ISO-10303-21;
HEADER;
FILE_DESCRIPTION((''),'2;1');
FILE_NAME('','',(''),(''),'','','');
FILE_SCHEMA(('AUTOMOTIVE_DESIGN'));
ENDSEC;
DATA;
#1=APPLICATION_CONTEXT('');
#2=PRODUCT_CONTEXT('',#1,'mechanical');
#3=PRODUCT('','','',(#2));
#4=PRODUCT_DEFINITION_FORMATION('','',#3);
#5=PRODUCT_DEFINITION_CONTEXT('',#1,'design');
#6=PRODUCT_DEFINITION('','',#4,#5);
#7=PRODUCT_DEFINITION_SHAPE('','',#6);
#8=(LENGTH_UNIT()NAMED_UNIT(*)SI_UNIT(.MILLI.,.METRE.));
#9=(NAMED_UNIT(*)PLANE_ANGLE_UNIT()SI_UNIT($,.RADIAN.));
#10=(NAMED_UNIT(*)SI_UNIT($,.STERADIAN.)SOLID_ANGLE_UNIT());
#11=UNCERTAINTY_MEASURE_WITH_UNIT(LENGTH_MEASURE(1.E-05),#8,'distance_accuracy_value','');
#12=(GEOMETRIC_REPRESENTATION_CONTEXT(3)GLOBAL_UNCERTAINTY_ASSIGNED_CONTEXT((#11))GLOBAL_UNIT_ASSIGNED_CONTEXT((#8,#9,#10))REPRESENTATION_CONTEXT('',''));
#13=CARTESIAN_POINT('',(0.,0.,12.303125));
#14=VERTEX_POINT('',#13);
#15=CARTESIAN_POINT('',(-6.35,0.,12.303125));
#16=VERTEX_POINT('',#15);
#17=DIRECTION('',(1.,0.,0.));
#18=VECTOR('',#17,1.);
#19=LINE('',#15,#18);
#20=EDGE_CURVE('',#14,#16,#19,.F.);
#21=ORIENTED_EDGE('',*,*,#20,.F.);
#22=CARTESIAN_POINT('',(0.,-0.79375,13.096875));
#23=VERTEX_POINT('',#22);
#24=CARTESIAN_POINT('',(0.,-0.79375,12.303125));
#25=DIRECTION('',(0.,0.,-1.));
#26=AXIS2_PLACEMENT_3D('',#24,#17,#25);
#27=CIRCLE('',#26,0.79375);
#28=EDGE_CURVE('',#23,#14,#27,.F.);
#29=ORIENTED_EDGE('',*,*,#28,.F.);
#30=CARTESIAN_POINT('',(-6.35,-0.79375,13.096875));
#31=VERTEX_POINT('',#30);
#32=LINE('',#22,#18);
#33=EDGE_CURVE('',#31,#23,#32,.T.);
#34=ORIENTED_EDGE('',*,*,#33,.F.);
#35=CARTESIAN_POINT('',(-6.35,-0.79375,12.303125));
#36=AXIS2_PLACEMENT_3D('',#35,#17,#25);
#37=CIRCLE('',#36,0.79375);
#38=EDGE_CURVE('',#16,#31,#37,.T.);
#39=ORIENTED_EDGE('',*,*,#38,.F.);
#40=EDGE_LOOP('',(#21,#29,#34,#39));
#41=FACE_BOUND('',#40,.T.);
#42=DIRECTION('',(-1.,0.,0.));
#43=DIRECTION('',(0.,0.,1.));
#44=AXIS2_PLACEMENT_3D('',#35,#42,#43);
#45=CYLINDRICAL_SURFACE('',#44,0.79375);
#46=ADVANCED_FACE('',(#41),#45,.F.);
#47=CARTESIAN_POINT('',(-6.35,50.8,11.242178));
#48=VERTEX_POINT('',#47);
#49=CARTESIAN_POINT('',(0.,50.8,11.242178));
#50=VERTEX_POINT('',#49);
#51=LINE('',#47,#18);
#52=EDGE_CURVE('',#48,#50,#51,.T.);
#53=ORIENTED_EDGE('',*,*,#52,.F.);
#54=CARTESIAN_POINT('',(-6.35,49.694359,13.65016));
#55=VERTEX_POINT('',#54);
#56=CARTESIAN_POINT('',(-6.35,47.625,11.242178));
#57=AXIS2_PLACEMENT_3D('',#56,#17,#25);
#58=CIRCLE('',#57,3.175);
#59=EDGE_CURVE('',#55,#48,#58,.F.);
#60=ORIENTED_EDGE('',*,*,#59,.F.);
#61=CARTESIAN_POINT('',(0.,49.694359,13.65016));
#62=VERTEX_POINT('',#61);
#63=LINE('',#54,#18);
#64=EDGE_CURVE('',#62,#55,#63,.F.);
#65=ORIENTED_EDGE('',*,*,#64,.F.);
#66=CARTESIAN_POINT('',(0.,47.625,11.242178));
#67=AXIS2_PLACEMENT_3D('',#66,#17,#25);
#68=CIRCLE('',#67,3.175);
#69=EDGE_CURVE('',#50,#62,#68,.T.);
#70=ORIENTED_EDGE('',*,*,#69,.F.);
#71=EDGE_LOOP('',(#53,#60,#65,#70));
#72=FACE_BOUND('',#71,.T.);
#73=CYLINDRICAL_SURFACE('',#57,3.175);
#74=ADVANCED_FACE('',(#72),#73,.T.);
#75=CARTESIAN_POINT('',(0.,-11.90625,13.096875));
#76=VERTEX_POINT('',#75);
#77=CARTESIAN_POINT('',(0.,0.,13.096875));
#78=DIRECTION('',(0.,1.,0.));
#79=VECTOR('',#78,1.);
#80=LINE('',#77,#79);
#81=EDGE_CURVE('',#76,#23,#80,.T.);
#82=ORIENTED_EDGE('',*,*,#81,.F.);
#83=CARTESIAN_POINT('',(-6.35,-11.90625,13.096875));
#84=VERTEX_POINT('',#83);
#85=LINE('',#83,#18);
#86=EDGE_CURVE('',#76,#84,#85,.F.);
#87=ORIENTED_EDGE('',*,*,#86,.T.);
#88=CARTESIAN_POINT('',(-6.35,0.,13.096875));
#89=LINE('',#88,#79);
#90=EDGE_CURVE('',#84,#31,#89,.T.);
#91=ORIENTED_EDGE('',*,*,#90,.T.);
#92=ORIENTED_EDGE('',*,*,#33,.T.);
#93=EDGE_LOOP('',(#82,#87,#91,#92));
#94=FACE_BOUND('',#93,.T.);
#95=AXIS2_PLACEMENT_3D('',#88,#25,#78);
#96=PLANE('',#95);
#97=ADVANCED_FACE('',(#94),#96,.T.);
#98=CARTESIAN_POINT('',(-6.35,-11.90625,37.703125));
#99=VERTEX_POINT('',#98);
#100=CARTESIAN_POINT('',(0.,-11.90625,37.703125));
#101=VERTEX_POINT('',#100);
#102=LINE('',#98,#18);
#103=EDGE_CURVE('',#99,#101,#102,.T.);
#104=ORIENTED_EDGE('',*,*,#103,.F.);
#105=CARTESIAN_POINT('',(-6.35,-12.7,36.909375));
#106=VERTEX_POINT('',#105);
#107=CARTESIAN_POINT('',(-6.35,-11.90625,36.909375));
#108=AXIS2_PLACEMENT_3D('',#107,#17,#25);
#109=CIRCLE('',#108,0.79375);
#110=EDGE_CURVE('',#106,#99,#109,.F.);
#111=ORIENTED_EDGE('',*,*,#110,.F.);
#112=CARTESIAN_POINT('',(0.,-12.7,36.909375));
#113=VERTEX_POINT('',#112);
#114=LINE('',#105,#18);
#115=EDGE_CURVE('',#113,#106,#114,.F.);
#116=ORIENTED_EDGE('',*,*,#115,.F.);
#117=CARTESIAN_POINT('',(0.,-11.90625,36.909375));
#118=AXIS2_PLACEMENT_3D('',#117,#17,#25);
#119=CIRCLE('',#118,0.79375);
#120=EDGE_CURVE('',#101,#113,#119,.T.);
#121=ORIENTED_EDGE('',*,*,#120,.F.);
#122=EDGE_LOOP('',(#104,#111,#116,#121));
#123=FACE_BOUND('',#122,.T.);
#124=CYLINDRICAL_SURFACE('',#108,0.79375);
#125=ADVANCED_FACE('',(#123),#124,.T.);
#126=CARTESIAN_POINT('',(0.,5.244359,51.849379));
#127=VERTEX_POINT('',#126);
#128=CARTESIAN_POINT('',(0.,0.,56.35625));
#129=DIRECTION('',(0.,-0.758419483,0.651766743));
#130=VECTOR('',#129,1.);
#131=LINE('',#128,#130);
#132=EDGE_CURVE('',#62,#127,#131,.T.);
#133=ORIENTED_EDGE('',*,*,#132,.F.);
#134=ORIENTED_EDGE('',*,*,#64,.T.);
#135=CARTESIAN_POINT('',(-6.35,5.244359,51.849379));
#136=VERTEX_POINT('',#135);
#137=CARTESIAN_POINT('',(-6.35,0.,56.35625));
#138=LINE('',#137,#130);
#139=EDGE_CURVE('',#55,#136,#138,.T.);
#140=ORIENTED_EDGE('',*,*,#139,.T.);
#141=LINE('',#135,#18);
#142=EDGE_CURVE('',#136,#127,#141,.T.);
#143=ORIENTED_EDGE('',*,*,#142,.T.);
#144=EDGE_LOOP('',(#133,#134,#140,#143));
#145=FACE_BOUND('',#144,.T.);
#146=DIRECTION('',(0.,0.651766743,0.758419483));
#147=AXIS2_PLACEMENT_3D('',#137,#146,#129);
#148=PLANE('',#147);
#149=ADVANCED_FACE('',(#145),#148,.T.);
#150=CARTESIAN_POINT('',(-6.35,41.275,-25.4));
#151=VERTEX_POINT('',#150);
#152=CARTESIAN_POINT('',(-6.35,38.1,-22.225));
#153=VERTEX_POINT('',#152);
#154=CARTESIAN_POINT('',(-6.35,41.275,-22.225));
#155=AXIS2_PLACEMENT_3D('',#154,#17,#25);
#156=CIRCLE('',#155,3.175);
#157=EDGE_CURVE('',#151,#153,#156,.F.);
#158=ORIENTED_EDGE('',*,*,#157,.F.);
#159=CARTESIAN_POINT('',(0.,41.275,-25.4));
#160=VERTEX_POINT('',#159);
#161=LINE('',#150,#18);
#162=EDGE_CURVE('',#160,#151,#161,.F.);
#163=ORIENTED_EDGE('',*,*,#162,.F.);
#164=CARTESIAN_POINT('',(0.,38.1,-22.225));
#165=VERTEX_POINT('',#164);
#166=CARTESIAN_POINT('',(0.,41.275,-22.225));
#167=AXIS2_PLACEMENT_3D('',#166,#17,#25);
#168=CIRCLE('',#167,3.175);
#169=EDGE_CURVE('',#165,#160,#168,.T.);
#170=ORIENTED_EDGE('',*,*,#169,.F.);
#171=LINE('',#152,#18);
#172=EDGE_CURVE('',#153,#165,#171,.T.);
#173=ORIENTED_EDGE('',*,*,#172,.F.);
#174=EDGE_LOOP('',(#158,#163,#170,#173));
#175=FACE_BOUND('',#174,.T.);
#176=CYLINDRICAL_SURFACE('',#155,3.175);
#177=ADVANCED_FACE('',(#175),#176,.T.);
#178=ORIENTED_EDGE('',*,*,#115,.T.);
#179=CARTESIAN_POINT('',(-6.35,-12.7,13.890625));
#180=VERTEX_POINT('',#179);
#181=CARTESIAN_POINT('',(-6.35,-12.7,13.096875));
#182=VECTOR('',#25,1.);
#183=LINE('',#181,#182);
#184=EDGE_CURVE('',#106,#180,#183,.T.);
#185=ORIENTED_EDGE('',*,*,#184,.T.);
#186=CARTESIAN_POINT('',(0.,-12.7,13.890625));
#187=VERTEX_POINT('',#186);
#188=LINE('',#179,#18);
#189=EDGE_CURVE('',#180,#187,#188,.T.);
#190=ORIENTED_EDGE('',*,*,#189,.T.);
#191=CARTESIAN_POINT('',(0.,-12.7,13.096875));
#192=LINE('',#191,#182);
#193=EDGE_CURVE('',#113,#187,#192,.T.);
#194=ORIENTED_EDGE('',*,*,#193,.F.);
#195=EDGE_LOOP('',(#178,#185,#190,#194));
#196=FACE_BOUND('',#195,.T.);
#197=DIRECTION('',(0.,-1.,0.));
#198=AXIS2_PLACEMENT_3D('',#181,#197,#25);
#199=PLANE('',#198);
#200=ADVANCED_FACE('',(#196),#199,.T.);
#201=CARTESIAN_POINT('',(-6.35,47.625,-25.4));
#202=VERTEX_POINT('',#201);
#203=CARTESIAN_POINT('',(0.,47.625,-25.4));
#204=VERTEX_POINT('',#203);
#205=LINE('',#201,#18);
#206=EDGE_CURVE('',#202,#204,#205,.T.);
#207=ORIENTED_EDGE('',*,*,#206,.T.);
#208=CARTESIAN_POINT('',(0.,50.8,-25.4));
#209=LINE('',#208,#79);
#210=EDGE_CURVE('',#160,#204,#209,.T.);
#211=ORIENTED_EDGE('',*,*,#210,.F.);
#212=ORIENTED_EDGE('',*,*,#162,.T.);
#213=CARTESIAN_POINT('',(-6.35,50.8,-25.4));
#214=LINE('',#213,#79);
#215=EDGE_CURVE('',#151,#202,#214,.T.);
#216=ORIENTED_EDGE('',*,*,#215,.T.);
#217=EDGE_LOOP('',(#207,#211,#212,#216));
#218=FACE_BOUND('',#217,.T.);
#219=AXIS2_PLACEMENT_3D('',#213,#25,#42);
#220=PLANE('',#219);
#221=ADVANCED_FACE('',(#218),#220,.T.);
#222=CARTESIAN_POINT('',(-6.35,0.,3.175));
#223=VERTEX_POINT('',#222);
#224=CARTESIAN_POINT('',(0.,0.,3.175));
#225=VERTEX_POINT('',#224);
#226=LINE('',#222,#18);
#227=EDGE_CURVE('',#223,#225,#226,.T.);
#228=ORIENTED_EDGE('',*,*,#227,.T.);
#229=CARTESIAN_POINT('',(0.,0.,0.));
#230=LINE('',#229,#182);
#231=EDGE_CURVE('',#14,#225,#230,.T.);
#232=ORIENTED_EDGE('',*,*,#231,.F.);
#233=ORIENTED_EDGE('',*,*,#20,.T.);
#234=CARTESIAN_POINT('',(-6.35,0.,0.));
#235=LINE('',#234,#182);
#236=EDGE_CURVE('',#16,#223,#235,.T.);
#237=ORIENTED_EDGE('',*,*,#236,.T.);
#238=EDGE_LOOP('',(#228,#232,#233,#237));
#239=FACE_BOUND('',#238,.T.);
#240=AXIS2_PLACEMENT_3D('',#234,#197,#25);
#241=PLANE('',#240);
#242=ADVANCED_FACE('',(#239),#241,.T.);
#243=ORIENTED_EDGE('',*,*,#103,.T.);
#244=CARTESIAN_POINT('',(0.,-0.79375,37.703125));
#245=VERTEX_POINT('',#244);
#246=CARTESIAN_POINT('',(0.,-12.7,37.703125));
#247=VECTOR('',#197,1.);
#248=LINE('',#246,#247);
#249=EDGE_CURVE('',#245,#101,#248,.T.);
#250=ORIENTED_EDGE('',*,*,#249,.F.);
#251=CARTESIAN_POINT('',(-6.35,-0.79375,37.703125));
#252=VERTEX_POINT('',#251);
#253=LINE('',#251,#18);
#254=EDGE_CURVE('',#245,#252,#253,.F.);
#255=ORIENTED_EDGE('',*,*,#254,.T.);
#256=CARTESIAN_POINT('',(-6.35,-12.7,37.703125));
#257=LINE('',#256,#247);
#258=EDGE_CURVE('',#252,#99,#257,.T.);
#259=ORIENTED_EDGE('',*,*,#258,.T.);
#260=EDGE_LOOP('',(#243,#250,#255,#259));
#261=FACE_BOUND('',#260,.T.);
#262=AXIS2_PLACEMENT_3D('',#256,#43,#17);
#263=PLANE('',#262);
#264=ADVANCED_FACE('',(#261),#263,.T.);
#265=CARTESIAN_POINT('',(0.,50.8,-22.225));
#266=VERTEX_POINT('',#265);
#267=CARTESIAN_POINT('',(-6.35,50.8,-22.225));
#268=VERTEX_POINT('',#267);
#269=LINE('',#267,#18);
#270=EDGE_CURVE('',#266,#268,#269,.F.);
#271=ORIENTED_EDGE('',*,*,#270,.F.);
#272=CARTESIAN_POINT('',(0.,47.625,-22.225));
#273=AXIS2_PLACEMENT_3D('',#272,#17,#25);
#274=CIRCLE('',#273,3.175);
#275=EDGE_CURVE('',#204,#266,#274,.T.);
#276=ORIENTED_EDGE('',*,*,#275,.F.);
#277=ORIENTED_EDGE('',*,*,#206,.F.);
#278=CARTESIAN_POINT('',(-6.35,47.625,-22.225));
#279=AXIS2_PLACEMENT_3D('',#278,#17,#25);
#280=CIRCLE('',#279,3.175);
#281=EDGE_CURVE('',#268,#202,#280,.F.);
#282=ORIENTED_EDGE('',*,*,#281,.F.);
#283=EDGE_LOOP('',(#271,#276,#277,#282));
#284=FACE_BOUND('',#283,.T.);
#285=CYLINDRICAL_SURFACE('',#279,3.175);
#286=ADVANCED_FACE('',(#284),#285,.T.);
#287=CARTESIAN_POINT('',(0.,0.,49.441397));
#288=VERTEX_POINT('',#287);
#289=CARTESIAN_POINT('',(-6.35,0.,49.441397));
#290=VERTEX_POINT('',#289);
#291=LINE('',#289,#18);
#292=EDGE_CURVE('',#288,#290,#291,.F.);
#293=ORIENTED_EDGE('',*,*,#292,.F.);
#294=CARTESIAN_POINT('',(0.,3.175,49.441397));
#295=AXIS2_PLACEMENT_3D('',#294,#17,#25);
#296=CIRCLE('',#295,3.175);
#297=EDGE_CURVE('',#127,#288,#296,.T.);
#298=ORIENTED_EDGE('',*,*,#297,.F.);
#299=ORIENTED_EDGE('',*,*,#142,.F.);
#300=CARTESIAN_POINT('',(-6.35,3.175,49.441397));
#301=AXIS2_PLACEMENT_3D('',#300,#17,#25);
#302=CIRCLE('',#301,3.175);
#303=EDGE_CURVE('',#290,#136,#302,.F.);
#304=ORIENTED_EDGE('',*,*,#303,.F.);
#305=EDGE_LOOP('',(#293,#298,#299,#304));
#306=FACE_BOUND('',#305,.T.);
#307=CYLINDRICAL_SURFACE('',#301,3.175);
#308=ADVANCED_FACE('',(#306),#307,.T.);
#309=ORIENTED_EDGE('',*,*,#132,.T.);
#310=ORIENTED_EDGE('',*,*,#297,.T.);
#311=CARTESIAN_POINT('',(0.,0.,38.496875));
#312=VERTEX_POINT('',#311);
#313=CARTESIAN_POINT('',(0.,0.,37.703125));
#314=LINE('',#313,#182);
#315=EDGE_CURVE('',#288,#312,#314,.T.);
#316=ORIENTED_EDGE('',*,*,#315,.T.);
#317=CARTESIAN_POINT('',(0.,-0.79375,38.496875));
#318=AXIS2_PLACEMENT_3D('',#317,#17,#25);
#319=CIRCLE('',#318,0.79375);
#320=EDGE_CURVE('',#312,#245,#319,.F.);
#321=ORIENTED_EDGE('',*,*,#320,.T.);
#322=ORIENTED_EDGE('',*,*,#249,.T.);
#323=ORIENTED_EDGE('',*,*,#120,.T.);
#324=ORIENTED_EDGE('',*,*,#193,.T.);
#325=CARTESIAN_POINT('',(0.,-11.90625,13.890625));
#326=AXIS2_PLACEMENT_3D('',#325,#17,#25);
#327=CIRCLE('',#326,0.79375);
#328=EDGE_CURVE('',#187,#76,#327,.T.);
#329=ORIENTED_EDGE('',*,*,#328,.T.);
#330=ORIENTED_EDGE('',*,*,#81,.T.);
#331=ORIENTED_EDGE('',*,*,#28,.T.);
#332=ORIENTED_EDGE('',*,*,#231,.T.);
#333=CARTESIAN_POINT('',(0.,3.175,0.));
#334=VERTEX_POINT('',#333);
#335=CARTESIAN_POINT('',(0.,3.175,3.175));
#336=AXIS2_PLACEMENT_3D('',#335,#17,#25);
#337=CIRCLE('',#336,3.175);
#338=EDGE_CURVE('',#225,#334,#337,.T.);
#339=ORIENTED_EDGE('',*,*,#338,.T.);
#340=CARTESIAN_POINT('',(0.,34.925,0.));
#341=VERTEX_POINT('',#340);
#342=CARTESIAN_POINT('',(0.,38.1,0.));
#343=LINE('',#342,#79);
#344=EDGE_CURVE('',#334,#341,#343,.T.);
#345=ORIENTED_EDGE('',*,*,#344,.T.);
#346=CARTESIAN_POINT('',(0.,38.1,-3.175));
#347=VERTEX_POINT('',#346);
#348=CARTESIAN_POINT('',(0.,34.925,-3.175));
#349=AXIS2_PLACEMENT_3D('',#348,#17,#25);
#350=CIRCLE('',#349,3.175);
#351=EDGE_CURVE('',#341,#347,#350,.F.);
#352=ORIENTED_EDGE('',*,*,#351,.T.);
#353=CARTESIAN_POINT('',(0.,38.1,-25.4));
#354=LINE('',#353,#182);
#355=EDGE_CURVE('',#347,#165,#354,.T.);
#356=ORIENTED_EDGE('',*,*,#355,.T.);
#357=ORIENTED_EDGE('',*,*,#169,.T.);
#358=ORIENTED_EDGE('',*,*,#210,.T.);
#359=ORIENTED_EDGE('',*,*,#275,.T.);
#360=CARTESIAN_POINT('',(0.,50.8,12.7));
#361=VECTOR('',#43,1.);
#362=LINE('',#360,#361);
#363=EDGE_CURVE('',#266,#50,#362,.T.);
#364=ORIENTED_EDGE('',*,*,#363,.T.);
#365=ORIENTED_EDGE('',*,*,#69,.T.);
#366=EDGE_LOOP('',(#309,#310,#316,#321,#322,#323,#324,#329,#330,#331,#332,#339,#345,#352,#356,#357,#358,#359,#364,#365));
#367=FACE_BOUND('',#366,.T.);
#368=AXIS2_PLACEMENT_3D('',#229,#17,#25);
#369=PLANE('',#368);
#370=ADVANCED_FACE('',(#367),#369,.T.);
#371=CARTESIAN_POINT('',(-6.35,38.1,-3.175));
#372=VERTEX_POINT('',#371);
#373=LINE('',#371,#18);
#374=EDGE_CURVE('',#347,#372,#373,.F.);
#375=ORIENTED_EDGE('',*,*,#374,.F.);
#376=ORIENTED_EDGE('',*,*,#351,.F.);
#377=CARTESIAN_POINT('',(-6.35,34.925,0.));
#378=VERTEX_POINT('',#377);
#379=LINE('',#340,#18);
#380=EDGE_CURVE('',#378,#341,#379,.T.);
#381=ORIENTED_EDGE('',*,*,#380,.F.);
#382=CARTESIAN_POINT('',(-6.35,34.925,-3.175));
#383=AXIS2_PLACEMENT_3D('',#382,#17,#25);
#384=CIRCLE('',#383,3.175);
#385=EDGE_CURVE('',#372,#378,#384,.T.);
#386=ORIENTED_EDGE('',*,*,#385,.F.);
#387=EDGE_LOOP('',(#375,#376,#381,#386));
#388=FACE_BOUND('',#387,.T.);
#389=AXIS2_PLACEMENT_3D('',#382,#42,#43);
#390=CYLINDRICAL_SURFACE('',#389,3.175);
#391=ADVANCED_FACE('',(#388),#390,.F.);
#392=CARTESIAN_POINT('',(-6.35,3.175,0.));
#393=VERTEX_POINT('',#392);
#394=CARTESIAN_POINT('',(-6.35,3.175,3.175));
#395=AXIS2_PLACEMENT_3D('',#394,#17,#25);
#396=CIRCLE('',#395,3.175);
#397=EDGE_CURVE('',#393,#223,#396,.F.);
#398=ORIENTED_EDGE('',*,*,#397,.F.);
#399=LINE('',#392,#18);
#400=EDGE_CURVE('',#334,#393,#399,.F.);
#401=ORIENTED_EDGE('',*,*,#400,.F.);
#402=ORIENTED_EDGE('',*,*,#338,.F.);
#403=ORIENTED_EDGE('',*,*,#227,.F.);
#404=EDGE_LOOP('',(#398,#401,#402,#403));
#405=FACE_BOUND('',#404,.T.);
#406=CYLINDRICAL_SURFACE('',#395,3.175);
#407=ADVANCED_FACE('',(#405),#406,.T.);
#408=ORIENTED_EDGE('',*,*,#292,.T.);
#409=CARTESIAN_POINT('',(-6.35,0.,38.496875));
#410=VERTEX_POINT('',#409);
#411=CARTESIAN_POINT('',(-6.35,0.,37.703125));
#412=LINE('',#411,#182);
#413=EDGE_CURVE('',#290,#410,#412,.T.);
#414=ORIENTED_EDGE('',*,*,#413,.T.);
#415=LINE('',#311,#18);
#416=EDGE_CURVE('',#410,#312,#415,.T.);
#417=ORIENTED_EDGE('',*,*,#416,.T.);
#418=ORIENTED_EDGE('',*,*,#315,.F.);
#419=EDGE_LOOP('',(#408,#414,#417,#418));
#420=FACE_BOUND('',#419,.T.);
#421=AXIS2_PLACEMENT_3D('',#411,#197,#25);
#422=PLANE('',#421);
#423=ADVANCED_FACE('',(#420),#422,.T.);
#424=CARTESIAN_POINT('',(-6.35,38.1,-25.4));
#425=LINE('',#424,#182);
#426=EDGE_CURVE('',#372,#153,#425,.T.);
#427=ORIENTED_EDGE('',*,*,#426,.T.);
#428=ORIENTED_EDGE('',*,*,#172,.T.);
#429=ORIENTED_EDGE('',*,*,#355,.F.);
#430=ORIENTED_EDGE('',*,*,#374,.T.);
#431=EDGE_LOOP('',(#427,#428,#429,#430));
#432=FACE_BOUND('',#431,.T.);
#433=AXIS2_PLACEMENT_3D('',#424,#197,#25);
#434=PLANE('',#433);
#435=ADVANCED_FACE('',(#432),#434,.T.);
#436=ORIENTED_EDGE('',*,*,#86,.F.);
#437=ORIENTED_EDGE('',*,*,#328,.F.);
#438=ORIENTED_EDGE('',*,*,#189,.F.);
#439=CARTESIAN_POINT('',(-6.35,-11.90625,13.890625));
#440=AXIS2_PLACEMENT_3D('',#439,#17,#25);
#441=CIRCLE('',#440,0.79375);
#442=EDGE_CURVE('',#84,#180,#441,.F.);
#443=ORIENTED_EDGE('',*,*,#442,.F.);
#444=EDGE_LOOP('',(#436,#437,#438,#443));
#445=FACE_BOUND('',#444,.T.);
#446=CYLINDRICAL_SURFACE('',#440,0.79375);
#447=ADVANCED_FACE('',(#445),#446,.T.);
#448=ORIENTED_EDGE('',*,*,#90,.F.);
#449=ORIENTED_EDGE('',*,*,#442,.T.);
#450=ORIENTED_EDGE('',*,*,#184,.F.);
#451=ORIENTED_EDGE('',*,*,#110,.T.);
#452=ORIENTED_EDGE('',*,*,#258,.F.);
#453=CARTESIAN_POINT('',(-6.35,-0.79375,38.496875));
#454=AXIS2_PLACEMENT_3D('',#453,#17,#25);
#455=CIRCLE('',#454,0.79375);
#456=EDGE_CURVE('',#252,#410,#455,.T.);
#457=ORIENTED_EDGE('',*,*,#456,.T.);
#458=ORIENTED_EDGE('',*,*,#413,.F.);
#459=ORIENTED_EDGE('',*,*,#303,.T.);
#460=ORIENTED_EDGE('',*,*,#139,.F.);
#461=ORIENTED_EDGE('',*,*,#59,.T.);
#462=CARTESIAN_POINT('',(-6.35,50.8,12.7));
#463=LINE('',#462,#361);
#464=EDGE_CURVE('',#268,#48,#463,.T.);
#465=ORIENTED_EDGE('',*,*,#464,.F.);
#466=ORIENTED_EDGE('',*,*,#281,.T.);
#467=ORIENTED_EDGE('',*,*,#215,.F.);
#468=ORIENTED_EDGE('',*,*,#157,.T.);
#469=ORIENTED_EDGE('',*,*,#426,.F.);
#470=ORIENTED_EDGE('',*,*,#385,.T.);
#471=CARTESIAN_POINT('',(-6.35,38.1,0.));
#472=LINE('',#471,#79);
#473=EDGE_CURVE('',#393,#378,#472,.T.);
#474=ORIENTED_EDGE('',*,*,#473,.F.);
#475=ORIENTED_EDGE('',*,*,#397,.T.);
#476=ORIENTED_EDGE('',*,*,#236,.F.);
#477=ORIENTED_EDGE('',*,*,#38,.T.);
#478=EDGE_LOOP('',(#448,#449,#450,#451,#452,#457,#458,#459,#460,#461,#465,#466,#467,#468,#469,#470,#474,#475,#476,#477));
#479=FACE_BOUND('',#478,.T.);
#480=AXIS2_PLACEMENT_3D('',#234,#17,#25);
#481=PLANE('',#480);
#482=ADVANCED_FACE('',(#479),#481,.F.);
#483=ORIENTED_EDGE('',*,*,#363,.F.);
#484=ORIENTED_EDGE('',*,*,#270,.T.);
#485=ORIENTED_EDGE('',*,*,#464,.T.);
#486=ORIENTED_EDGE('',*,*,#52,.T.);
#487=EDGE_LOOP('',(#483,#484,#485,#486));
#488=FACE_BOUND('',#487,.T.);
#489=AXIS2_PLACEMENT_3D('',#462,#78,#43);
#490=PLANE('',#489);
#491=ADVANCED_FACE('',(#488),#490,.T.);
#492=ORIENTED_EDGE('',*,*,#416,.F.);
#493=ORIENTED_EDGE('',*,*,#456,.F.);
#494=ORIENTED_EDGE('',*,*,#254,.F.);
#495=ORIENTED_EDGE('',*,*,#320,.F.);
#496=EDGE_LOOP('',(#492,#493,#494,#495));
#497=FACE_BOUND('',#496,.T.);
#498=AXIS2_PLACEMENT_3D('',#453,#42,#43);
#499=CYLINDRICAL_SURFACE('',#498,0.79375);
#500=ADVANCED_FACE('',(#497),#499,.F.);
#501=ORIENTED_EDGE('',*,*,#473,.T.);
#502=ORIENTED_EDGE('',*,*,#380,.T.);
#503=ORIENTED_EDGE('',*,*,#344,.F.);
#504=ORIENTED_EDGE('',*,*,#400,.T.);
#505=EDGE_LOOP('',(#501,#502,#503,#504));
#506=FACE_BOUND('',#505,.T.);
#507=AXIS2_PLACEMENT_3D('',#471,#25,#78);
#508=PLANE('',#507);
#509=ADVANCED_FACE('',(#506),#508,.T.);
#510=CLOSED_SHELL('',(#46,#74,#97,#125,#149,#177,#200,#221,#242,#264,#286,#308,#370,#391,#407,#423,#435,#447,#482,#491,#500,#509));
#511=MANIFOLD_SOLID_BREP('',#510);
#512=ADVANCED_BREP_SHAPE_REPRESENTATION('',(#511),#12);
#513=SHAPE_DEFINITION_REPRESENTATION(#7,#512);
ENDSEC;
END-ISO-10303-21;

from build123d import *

# Parameters (mm, degrees)
BASE_FLANGE1_DEPTH = 6.35
FILLET1_R          = 3.175
FILLET2_R          = 0.79375


# Sheet-metal steps are written as plain solids
with BuildPart() as part:
    # Sketch1 → Base-Flange1 (new body)
    with BuildSketch(Plane(origin=(0, 0, 0), x_dir=(0, 0, -1), z_dir=(1, 0, 0))):
        Polygon((-56.35625, 0), (-12.7, 50.8), (25.4, 50.8), (25.4, 38.1), (0, 38.1), (0, 0), (-13.096875, 0), (-13.096875, -12.7), (-37.703125, -12.7), (-37.703125, 0), align=None)
    extrude(amount=-BASE_FLANGE1_DEPTH)

    # Fillet1
    fillet1_edges = [part.edges().sort_by_distance(p)[0] for p in [
        (-3.175, 0, 56.35625),
        (-3.175, 50.8, 12.7),
        (-3.175, 50.8, -25.4),
        (-3.175, 38.1, -25.4),
        (-3.175, 38.1, 0),
        (-3.175, 0, 0),
    ]]
    fillet(fillet1_edges, radius=FILLET1_R)

    # Fillet2
    fillet2_edges = [part.edges().sort_by_distance(p)[0] for p in [
        (-3.175, 0, 13.096875),
        (-3.175, -12.7, 13.096875),
        (-3.175, -12.7, 37.703125),
        (-3.175, 0, 37.703125),
    ]]
    fillet(fillet2_edges, radius=FILLET2_R)


solid = part.part
